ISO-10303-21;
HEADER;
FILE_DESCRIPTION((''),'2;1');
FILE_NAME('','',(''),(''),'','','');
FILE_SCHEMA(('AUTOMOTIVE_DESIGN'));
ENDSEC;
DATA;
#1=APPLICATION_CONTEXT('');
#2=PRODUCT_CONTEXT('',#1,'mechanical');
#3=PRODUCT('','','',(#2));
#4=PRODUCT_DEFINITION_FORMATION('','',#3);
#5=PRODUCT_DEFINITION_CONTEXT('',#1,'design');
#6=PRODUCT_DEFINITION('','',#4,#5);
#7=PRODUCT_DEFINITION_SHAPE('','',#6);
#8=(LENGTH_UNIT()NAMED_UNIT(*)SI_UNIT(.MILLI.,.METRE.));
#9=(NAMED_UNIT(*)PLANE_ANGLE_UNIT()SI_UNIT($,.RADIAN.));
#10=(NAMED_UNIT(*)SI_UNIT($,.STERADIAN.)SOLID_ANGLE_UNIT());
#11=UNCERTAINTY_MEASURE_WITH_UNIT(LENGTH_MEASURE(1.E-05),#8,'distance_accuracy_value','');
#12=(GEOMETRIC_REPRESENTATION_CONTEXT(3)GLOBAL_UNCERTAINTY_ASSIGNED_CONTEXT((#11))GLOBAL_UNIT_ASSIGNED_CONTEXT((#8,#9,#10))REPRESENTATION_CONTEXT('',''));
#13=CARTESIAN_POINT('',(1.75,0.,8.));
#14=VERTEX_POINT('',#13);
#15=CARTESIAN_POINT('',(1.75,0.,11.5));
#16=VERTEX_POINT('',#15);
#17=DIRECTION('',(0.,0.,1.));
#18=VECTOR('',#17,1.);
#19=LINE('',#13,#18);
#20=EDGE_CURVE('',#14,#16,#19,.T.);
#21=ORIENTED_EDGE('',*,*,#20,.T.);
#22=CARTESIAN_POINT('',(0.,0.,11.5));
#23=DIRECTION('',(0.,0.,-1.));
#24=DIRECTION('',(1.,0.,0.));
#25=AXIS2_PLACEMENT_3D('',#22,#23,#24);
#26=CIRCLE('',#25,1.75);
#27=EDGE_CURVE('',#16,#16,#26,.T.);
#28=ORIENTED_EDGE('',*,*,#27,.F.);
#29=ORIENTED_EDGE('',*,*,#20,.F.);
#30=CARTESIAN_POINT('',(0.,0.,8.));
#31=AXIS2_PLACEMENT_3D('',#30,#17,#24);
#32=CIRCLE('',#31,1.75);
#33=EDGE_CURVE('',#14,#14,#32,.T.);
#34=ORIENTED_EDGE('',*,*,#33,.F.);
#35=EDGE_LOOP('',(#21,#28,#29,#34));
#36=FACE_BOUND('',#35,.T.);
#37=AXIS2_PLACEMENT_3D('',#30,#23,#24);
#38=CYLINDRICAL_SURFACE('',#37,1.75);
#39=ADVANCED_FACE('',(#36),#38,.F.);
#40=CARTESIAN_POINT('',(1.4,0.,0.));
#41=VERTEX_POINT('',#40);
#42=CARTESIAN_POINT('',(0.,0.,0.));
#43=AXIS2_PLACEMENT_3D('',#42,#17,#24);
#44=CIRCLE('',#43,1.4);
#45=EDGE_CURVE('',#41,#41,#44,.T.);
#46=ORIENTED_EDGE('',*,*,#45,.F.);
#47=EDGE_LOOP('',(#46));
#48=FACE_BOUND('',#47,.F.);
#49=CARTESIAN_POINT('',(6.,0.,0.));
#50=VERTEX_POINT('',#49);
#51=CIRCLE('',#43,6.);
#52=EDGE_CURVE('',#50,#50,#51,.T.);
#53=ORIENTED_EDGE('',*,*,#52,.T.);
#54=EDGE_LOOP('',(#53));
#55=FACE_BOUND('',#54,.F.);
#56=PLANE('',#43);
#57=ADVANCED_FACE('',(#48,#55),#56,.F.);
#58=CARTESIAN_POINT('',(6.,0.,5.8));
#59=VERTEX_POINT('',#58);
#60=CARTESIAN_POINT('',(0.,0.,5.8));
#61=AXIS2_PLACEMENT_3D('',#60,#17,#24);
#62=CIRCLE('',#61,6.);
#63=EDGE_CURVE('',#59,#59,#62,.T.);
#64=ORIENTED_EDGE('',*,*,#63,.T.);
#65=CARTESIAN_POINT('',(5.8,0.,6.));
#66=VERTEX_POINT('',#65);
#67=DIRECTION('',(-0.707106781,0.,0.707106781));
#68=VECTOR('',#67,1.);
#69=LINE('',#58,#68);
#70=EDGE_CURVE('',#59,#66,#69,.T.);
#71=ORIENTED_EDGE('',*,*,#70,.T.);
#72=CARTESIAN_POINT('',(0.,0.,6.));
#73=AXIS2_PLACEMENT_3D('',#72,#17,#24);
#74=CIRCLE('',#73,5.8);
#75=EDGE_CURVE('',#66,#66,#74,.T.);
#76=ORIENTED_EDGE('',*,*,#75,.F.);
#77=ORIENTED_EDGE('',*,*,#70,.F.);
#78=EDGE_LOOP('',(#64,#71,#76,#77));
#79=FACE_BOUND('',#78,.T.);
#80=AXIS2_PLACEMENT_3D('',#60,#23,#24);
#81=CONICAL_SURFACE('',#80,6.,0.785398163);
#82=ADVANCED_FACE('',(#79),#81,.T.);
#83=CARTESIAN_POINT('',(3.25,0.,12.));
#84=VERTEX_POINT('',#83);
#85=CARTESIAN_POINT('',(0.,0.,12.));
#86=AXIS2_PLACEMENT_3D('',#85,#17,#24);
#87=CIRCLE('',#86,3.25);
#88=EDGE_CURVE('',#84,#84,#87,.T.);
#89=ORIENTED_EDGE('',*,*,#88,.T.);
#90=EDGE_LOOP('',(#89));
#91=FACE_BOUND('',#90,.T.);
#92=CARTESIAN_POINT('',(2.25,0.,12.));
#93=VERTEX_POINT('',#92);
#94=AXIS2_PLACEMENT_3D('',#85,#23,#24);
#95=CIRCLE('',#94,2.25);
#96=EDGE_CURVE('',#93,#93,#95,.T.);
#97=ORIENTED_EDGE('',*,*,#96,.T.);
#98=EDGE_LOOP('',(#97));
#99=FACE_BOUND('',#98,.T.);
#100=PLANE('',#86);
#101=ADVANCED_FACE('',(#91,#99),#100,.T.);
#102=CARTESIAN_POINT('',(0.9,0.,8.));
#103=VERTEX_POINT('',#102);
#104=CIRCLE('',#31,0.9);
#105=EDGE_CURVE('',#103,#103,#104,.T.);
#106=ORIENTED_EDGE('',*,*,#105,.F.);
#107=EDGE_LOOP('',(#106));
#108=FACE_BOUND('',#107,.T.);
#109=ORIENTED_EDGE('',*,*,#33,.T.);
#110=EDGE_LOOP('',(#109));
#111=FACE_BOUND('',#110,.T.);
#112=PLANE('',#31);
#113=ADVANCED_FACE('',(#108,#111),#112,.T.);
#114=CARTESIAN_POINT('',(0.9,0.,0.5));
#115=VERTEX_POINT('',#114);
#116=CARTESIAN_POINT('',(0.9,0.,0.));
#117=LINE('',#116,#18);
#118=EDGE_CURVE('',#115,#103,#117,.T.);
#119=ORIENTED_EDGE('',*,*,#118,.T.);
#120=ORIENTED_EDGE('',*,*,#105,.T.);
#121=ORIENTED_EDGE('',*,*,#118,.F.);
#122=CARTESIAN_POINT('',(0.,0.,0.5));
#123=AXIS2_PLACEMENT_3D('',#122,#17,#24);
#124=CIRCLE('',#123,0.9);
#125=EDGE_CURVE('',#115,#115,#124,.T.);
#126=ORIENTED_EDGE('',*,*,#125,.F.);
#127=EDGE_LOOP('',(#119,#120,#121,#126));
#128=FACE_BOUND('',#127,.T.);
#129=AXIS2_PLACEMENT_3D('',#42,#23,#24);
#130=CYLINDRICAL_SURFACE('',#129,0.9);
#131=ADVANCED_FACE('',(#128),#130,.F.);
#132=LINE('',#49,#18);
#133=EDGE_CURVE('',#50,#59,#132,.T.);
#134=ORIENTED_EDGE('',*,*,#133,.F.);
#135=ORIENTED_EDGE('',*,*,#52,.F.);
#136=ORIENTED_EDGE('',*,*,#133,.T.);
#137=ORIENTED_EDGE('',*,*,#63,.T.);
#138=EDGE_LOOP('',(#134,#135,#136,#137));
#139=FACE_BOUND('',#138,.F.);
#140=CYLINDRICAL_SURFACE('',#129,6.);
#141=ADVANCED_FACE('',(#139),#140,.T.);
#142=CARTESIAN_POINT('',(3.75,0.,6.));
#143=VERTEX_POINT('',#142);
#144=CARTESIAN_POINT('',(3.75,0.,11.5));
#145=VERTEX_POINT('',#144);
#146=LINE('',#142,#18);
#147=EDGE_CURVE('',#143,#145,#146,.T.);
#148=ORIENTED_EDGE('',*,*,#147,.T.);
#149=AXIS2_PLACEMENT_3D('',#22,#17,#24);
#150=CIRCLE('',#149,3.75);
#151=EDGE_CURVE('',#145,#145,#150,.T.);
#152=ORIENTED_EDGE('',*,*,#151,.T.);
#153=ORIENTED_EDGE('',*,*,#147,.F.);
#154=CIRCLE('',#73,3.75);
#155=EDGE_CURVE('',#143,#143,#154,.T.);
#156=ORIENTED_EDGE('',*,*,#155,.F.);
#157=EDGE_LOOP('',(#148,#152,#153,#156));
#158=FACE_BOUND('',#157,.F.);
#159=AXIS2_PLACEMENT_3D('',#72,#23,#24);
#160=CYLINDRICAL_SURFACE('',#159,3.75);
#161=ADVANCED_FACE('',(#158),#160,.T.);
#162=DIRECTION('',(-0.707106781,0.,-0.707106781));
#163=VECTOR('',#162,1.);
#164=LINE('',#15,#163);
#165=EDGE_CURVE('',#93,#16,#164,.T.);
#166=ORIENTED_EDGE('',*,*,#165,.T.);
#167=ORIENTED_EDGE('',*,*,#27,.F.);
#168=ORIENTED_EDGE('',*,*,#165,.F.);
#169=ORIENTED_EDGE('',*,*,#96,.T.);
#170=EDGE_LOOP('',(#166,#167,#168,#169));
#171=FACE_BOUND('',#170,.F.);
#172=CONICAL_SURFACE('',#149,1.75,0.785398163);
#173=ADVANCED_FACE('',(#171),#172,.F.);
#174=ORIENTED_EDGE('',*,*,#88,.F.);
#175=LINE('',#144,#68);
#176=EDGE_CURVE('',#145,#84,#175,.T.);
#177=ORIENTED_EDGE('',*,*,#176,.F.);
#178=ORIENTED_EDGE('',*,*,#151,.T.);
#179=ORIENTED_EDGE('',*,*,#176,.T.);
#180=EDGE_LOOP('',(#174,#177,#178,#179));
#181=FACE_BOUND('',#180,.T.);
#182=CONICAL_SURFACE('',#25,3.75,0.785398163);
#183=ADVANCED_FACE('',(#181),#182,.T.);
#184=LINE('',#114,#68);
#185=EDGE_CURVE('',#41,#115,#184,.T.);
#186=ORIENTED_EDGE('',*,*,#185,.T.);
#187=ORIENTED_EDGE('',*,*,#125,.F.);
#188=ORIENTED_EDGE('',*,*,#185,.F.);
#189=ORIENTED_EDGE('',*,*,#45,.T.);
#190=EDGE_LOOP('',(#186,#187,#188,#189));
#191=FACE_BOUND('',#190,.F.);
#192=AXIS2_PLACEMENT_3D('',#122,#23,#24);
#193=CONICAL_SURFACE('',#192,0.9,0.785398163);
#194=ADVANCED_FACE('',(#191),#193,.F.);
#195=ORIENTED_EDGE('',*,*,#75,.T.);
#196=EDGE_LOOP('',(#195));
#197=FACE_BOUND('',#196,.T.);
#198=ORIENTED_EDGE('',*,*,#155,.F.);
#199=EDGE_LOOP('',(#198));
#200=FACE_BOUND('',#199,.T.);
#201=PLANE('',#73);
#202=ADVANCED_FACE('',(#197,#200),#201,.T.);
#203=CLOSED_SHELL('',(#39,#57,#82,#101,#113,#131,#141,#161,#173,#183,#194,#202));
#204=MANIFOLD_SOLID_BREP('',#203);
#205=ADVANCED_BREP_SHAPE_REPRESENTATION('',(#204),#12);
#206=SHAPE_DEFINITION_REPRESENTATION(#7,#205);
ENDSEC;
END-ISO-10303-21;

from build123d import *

# Parameters (mm, degrees)
F0_R        = 3.75
F0_R_2      = 1.75
F0_R_3      = 0.9
F1_DEPTH    = 6
F0_R_4      = 6
F1_FACE_R   = 3.75
F1_FACE_R_2 = 0.9
F2_DEPTH    = 6
F3_START    = 8
F3_DEPTH    = 6
F4_SIZE     = 0.5
F5_SIZE     = 0.2
F6_SIZE     = 0.5


with BuildPart() as f1:
    # F0 (on Top) → F1 (new body)
    with BuildSketch(Plane.XY):
        Circle(F0_R)
        Circle(F0_R_2, mode=Mode.SUBTRACT)
        Circle(F0_R_2)
        Circle(F0_R_3, mode=Mode.SUBTRACT)
    extrude(amount=F1_DEPTH)

    # F0 (on Top) + F1_face (on face) → F2 (join)
    with BuildSketch(Plane.XY):
        Circle(F0_R_4)
        Circle(F0_R, mode=Mode.SUBTRACT)
    with BuildSketch(Plane.XY.offset(6)):
        Circle(F1_FACE_R)
        Circle(F1_FACE_R_2, mode=Mode.SUBTRACT)
    extrude(amount=F2_DEPTH)

    # F0 (on Top) → F3 (cut)
    with BuildSketch(Plane.XY.offset(F3_START)):
        Circle(F0_R_2)
        Circle(F0_R_3, mode=Mode.SUBTRACT)
    extrude(amount=F3_DEPTH, mode=Mode.SUBTRACT)

    # F4
    f4_edges = [f1.edges().sort_by_distance(p)[0] for p in [
        (-0.9, 0, 0),
    ]]
    chamfer(f4_edges, length=F4_SIZE)

    # F5
    f5_edges = [f1.edges().sort_by_distance(p)[0] for p in [
        (-6, 0, 6),
    ]]
    chamfer(f5_edges, length=F5_SIZE)

    # F6
    f6_edges = [f1.edges().sort_by_distance(p)[0] for p in [
        (-3.75, 0, 12),
        (-1.75, 0, 12),
    ]]
    chamfer(f6_edges, length=F6_SIZE)


solid = f1.part
